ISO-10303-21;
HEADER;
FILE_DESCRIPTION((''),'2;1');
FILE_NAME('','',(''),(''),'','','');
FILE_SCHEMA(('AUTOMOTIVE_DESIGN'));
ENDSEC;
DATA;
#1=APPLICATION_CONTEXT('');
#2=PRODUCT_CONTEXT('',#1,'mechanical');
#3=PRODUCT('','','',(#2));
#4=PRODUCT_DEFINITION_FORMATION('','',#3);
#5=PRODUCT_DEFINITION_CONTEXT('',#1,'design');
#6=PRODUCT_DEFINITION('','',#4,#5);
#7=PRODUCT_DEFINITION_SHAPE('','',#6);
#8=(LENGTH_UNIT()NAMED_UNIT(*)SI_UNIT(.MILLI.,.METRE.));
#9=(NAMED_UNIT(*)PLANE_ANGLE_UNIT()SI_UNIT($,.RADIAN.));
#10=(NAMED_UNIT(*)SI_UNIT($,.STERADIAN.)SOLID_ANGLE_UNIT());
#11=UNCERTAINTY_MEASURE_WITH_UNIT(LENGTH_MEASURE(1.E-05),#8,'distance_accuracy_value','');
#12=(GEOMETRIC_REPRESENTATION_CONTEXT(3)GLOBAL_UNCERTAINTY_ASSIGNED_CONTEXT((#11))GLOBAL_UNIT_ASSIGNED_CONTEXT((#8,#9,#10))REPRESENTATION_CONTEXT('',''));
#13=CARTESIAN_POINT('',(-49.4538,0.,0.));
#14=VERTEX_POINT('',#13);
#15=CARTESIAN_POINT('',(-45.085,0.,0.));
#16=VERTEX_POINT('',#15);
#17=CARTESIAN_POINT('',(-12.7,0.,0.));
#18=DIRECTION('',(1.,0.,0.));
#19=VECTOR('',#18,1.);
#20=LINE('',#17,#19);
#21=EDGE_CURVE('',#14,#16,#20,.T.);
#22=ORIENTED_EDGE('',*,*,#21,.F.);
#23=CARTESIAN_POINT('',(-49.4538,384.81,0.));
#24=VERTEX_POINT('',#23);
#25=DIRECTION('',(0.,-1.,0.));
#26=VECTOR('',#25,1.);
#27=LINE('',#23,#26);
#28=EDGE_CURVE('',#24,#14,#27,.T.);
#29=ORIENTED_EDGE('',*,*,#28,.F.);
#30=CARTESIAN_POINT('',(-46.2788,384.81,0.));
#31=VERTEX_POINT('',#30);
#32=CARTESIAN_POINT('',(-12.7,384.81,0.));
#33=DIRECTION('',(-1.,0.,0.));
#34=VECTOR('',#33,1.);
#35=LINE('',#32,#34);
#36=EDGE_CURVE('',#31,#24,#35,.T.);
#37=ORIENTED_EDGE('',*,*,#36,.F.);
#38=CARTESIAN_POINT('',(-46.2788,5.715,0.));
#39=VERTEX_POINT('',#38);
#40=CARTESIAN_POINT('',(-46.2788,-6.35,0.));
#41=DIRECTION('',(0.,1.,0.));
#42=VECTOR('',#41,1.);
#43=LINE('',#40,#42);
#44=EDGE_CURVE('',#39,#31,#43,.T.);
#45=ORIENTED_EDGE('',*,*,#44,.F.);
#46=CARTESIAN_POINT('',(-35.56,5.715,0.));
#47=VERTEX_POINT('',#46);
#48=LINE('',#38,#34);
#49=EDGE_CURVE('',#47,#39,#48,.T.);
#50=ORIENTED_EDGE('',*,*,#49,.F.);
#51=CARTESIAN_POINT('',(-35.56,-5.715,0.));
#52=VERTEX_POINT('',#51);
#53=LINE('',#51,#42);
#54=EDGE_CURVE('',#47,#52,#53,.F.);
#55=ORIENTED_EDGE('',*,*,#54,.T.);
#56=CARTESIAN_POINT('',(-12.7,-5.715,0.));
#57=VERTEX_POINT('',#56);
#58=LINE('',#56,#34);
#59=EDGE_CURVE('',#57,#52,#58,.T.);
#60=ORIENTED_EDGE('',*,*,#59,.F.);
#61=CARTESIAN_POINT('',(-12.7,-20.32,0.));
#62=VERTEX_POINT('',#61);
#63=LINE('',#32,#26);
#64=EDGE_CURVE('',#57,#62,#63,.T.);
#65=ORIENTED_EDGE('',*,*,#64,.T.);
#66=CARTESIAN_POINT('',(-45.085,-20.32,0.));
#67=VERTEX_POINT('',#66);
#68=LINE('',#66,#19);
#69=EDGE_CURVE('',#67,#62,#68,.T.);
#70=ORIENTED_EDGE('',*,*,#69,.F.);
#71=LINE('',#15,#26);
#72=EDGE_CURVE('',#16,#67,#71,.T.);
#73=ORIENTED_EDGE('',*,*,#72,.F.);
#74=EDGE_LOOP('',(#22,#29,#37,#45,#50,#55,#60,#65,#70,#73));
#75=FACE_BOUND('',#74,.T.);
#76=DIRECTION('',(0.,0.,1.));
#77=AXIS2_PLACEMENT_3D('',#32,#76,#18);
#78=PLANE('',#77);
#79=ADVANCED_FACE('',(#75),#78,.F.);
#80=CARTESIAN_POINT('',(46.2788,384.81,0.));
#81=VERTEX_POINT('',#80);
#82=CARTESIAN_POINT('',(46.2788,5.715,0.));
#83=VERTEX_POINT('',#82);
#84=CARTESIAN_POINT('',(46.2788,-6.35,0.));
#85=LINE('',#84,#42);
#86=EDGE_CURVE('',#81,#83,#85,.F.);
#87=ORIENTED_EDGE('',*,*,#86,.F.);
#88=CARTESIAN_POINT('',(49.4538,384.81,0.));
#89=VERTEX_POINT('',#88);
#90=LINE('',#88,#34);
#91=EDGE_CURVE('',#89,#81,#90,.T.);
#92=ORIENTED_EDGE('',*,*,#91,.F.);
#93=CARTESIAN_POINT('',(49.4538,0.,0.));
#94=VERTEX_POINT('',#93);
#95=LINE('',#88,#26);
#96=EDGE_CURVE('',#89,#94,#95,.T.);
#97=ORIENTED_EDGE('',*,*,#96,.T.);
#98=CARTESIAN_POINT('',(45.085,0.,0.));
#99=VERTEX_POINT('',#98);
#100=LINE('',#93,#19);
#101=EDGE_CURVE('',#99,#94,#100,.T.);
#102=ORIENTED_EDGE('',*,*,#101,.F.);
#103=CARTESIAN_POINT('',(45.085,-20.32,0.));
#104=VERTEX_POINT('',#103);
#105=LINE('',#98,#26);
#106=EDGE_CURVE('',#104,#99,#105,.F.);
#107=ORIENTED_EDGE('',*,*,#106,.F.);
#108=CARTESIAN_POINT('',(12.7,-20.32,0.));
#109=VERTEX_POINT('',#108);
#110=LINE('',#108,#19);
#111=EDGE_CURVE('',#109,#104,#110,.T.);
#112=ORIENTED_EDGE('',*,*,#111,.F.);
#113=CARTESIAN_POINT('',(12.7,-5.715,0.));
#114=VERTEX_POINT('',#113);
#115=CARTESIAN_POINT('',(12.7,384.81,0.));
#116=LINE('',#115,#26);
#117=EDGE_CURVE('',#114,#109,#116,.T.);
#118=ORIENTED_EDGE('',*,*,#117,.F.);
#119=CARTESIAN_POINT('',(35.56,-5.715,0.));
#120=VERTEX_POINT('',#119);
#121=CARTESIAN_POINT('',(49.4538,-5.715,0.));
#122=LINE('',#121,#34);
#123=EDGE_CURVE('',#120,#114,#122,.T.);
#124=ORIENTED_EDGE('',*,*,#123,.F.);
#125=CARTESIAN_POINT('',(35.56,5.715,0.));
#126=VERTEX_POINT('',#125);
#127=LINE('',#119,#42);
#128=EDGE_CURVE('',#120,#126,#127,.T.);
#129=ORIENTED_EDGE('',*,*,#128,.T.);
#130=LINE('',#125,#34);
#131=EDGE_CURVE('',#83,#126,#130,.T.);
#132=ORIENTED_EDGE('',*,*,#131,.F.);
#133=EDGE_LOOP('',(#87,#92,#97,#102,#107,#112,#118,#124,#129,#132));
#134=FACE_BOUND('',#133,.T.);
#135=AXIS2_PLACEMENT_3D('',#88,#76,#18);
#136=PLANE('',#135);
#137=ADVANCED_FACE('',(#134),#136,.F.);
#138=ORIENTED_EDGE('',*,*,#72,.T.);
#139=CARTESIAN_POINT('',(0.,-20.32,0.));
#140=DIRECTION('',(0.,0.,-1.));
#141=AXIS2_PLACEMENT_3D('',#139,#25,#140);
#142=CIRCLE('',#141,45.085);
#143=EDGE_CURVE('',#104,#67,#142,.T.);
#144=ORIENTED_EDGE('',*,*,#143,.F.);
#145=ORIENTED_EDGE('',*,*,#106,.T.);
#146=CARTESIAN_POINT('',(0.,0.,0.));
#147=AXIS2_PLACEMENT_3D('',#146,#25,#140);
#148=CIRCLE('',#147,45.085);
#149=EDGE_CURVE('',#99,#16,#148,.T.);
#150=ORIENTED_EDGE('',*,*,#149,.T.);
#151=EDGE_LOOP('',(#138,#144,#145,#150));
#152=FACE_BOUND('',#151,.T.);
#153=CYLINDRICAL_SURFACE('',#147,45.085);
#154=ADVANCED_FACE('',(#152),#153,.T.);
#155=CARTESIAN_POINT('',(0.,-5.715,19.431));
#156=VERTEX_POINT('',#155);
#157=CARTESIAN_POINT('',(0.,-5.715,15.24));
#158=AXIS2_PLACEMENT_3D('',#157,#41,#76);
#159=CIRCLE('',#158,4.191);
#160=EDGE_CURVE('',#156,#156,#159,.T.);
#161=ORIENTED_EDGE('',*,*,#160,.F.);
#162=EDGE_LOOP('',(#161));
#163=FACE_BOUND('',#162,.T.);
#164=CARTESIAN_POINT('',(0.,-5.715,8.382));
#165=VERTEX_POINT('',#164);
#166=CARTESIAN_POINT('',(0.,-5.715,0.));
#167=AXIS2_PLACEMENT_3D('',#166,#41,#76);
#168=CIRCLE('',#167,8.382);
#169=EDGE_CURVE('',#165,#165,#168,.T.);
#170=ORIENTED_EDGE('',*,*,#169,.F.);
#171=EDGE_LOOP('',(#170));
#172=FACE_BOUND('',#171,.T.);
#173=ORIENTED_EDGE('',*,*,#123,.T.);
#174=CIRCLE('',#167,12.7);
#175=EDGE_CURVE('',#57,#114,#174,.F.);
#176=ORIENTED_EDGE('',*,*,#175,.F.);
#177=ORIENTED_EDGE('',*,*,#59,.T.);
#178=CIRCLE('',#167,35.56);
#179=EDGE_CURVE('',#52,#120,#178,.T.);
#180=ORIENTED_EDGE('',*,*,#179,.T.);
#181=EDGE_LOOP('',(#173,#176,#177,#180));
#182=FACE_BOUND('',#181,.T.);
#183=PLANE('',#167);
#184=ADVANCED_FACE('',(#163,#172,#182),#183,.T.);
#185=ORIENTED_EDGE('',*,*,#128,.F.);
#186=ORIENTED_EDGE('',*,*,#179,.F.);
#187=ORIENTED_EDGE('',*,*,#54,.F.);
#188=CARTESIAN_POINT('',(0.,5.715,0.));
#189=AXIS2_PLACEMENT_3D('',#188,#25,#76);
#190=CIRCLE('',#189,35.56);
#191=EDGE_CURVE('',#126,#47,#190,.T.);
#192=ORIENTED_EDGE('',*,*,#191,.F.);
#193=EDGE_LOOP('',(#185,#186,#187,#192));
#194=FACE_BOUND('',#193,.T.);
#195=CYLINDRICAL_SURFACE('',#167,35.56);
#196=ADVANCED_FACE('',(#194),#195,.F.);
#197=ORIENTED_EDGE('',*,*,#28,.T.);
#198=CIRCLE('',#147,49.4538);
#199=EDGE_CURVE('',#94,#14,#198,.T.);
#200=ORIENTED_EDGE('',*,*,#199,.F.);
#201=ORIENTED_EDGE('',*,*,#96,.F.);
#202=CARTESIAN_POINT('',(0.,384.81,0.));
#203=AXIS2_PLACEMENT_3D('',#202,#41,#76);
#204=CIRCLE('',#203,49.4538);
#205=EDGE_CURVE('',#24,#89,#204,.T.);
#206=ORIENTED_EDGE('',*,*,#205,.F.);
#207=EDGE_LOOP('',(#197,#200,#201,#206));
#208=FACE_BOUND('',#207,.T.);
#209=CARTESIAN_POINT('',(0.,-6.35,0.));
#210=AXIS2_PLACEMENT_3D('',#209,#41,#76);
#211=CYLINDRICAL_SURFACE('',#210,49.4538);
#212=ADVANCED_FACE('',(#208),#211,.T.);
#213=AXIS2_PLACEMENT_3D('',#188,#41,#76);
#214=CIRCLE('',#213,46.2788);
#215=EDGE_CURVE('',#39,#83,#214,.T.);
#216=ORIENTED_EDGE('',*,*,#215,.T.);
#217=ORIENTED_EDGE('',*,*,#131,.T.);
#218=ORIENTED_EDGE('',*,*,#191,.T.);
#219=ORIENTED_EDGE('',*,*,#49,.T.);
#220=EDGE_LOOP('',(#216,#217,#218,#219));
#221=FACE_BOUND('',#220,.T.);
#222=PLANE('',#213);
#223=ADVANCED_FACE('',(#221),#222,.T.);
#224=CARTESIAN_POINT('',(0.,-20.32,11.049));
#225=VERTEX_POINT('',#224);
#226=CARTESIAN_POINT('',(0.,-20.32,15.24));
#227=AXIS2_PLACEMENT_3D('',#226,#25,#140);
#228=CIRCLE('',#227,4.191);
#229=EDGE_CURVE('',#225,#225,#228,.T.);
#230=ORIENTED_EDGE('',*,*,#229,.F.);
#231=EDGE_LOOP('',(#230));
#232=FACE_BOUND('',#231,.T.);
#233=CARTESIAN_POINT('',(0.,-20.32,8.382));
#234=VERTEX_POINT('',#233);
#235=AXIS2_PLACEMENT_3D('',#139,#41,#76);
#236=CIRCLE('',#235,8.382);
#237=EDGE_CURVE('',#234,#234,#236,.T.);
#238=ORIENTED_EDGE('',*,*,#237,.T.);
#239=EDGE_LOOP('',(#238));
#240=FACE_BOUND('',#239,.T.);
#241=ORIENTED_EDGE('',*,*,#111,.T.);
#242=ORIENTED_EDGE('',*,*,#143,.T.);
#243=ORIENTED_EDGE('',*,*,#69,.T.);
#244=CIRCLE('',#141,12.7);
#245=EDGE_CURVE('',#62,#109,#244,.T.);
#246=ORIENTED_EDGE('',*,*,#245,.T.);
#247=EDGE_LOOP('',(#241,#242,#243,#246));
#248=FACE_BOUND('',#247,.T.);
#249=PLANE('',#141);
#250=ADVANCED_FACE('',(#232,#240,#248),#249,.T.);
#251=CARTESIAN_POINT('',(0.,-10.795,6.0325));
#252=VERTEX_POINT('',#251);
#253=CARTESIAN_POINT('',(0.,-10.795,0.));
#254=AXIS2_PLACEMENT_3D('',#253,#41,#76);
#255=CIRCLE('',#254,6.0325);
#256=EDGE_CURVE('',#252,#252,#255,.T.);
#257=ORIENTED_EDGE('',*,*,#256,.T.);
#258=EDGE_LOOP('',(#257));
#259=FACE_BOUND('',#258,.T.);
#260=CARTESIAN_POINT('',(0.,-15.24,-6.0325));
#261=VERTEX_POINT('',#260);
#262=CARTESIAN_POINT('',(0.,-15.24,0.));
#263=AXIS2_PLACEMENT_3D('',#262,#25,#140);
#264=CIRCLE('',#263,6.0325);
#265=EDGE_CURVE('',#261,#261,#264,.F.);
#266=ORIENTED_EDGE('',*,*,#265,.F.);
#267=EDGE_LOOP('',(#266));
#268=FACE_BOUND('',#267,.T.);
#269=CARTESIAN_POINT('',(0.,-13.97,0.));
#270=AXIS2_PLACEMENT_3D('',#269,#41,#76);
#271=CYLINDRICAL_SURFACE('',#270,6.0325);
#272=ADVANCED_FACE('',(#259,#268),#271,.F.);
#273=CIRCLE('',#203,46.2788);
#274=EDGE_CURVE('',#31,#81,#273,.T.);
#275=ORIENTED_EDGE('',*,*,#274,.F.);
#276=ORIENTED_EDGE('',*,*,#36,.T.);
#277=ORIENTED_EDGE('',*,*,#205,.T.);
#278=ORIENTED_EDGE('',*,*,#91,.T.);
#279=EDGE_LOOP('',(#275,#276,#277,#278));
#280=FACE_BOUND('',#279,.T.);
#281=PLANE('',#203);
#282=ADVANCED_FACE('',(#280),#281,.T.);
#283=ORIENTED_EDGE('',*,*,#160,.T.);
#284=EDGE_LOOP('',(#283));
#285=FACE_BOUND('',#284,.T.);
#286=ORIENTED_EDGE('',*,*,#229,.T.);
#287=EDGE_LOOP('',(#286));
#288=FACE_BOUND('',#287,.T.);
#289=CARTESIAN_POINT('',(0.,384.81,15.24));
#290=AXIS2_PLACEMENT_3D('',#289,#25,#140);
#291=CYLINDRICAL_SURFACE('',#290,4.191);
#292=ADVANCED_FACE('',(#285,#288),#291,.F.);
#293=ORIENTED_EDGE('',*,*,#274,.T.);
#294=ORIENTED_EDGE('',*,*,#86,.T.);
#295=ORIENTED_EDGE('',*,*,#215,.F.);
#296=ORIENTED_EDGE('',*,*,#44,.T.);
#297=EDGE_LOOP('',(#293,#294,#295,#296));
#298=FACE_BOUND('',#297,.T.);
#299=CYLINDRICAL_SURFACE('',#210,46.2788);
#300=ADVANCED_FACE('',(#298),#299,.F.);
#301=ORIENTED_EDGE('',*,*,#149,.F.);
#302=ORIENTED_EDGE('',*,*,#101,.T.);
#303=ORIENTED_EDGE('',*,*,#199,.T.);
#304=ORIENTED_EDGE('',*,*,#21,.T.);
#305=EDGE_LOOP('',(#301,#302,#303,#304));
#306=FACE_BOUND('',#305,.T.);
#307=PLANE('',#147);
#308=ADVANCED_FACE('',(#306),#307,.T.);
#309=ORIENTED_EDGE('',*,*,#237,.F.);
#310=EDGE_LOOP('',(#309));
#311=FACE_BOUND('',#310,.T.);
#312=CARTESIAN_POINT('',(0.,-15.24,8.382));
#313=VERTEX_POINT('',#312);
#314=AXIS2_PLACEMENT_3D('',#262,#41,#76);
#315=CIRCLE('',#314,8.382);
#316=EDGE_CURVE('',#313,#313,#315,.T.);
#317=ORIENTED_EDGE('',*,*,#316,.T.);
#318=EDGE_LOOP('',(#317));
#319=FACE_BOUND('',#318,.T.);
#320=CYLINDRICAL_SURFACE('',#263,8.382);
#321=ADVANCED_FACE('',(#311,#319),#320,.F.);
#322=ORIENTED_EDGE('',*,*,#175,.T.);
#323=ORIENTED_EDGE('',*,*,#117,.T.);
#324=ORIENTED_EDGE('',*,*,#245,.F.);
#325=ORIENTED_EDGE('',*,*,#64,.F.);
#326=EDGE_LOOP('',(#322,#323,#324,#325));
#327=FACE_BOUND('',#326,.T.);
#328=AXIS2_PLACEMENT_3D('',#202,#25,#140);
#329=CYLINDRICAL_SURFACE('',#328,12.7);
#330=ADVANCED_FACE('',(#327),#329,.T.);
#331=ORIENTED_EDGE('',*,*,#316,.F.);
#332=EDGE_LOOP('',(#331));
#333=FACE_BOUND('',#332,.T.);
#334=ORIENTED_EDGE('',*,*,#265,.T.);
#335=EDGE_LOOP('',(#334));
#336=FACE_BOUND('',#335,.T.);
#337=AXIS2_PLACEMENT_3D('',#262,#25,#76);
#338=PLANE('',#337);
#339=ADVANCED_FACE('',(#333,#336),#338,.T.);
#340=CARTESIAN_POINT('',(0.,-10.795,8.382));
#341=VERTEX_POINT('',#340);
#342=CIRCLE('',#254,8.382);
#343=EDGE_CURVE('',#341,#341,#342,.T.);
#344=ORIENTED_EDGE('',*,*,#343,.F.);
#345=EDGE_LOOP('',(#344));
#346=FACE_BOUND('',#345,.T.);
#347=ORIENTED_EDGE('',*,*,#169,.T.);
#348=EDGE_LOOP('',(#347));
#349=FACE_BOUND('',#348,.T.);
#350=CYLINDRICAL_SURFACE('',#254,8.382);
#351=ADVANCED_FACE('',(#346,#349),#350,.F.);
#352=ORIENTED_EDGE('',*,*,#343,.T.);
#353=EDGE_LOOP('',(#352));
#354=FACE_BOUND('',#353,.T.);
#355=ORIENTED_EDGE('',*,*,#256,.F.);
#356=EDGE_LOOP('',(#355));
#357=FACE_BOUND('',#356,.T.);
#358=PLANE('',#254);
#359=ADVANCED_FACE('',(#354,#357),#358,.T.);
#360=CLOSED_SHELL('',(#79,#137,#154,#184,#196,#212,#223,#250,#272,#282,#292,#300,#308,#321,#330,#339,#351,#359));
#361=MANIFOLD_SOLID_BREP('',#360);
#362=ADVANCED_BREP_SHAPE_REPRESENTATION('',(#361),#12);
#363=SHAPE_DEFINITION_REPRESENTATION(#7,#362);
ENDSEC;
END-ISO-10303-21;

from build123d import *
from build123d.topology import SkipClean

# Parameters (mm, degrees)
BOSS_EXTRUDE1_DEPTH      = 3.81
BOSS_EXTRUDE1_DEPTH_BACK = 6.35
SKETCH1_R                = 49.4538
SKETCH2_R                = 49.4538
BOSS_EXTRUDE2_DEPTH      = 381
SHELL1_T                 = -3.175
CUT_EXTRUDE1_DEPTH       = 398.363186857
BOSS_EXTRUDE3_DEPTH      = 3.81
SKETCH7_R                = 49.4538
SKETCH7_R_2              = 45.085
CUT_EXTRUDE2_DEPTH       = 6.35
BOSS_EXTRUDE4_START      = 7.62
BOSS_EXTRUDE4_DEPTH      = 7.62
SKETCH10_R               = 35.56
CUT_EXTRUDE3_DEPTH       = 6.35
SKETCH11_R               = 8.382
CUT_EXTRUDE4_DEPTH       = 5.08
SKETCH12_R               = 6.0325
CUT_EXTRUDE5_DEPTH       = 402.739558289
BOSS_EXTRUDE5_DEPTH      = 5.08
SKETCH14_R               = 4.191
CUT_EXTRUDE6_DEPTH       = 405.866453376
BOSS_EXTRUDE6_START      = 6.35
SKETCH15_R               = 4.191
SKETCH15_R_2             = 6.0325
BOSS_EXTRUDE6_DEPTH      = 6.35


with BuildPart() as part:
    # Sketch1 → Boss-Extrude1 (new, two sides: drawn at the far end of the back side and taken through both)
    with BuildSketch(Plane(origin=(0, 0, 0), x_dir=(1, 0, 0), z_dir=(0, 1, 0)).offset(-BOSS_EXTRUDE1_DEPTH_BACK)):
        Circle(SKETCH1_R)
    extrude(amount=BOSS_EXTRUDE1_DEPTH + BOSS_EXTRUDE1_DEPTH_BACK)

    # Sketch2 → Boss-Extrude2 (add)
    with BuildSketch(Plane(origin=(0, 3.81, 0), x_dir=(1, 0, 0), z_dir=(0, 1, 0))):
        Circle(SKETCH2_R)
    extrude(amount=BOSS_EXTRUDE2_DEPTH)

    # Shell1
    shell1_openings = [part.faces().sort_by_distance(p)[0] for p in [
        (0, 384.81, 0),
    ]]
    offset(amount=SHELL1_T, openings=shell1_openings, kind=Kind.INTERSECTION)

    # Sketch4 → Cut-Extrude1 (cut, through all)
    with BuildSketch(Plane.XZ.offset(6.35)):
        with BuildLine():
            Line((49.4538, 0), (12.7, 0))
            ThreePointArc((12.7, 0), (0, -12.7), (-12.7, 0))
            Line((-12.7, 0), (-49.4538, 0))
            ThreePointArc((-49.4538, 0), (0, -49.4538), (49.4538, 0))
        make_face()
    extrude(amount=-CUT_EXTRUDE1_DEPTH, mode=Mode.SUBTRACT)

    # Sketch5 → Boss-Extrude3 (add)
    with BuildSketch(Plane(origin=(0, -3.175, 0), x_dir=(1, 0, 0), z_dir=(0, 1, 0))):
        with BuildLine():
            Line((-46.2788, 0), (-12.7, 0))
            ThreePointArc((-12.7, 0), (0, 12.7), (12.7, 0))
            Line((12.7, 0), (46.2788, 0))
            ThreePointArc((46.2788, 0), (0, -46.2788), (-46.2788, 0))
        make_face()
    extrude(amount=BOSS_EXTRUDE3_DEPTH)

    # Sketch7 → Cut-Extrude2 (cut)
    with BuildSketch(Plane.XZ.offset(6.35)):
        Circle(SKETCH7_R)
        Circle(SKETCH7_R_2, mode=Mode.SUBTRACT)
    extrude(amount=-CUT_EXTRUDE2_DEPTH, mode=Mode.SUBTRACT)

    # Sketch9 → Boss-Extrude4 (add)
    with SkipClean():  # the faces are left unmerged after this step: merging them gives an invalid solid
        with BuildSketch(Plane.XZ.offset(6.35).offset(BOSS_EXTRUDE4_START)):
            with BuildLine():
                Line((45.085, 0), (12.7, 0))
                ThreePointArc((12.7, 0), (0, -12.7), (-12.7, 0))
                Line((-12.7, 0), (-45.085, 0))
                ThreePointArc((-45.085, 0), (0, 45.085), (45.085, 0))
            make_face()
        extrude(amount=-BOSS_EXTRUDE4_DEPTH)
    add(part.part.scale(1), mode=Mode.REPLACE)  # the faces are merged on a copy

    # Sketch10 → Cut-Extrude3 (cut)
    with BuildSketch(Plane(origin=(0, 0.635, 0), x_dir=(1, 0, 0), z_dir=(0, 1, 0))):
        Circle(SKETCH10_R)
    extrude(amount=-CUT_EXTRUDE3_DEPTH, mode=Mode.SUBTRACT)

    # Sketch11 → Cut-Extrude4 (cut)
    with BuildSketch(Plane(origin=(0, -5.715, 0), x_dir=(1, 0, 0), z_dir=(0, 1, 0))):
        Circle(SKETCH11_R)
    cut_extrude4 = extrude(amount=-CUT_EXTRUDE4_DEPTH, mode=Mode.SUBTRACT)

    # Sketch12 → Cut-Extrude5 (cut, through all)
    with BuildSketch(Plane(origin=(0, -10.795, 0), x_dir=(1, 0, 0), z_dir=(0, 1, 0))):
        Circle(SKETCH12_R)
    extrude(amount=-CUT_EXTRUDE5_DEPTH, mode=Mode.SUBTRACT)

    # Sketch13 → Boss-Extrude5 (add)
    with SkipClean():  # the faces are left unmerged after this step: merging them gives an invalid solid
        with BuildSketch(Plane(origin=(0, 0.635, 0), x_dir=(1, 0, 0), z_dir=(0, 1, 0))):
            with BuildLine():
                Line((-46.2788, 0), (-35.56, 0))
                ThreePointArc((-35.56, 0), (0, -35.56), (35.56, 0))
                Line((35.56, 0), (46.2788, 0))
                ThreePointArc((46.2788, 0), (0, -46.2788), (-46.2788, 0))
            make_face()
        extrude(amount=BOSS_EXTRUDE5_DEPTH)
    add(part.part.scale(1), mode=Mode.REPLACE)  # the faces are merged on a copy

    # Sketch14 → Cut-Extrude6 (cut, through all)
    with BuildSketch(Plane.XZ.offset(13.97)):
        with Locations((0, 15.24)):
            Circle(SKETCH14_R)
    extrude(amount=-CUT_EXTRUDE6_DEPTH, mode=Mode.SUBTRACT)

    # Sketch15 → Boss-Extrude6 (add)
    with BuildSketch(Plane.XZ.offset(13.97).offset(BOSS_EXTRUDE6_START)):
        with BuildLine():
            Line((12.7, 0), (45.085, 0))
            ThreePointArc((45.085, 0), (0, 45.085), (-45.085, 0))
            Line((-45.085, 0), (-12.7, 0))
            ThreePointArc((-12.7, 0), (0, -12.7), (12.7, 0))
        make_face()
        with Locations((0, 15.24)):
            Circle(SKETCH15_R, mode=Mode.SUBTRACT)
        Circle(SKETCH15_R_2, mode=Mode.SUBTRACT)
    extrude(amount=-BOSS_EXTRUDE6_DEPTH)

    # Mirror2: Cut-Extrude4 across plane
    add(cut_extrude4.mirror(Plane(origin=(0, -13.0175, 0), x_dir=(0, 0, 1), z_dir=(0, -1, 0))), mode=Mode.SUBTRACT)


solid = part.part
